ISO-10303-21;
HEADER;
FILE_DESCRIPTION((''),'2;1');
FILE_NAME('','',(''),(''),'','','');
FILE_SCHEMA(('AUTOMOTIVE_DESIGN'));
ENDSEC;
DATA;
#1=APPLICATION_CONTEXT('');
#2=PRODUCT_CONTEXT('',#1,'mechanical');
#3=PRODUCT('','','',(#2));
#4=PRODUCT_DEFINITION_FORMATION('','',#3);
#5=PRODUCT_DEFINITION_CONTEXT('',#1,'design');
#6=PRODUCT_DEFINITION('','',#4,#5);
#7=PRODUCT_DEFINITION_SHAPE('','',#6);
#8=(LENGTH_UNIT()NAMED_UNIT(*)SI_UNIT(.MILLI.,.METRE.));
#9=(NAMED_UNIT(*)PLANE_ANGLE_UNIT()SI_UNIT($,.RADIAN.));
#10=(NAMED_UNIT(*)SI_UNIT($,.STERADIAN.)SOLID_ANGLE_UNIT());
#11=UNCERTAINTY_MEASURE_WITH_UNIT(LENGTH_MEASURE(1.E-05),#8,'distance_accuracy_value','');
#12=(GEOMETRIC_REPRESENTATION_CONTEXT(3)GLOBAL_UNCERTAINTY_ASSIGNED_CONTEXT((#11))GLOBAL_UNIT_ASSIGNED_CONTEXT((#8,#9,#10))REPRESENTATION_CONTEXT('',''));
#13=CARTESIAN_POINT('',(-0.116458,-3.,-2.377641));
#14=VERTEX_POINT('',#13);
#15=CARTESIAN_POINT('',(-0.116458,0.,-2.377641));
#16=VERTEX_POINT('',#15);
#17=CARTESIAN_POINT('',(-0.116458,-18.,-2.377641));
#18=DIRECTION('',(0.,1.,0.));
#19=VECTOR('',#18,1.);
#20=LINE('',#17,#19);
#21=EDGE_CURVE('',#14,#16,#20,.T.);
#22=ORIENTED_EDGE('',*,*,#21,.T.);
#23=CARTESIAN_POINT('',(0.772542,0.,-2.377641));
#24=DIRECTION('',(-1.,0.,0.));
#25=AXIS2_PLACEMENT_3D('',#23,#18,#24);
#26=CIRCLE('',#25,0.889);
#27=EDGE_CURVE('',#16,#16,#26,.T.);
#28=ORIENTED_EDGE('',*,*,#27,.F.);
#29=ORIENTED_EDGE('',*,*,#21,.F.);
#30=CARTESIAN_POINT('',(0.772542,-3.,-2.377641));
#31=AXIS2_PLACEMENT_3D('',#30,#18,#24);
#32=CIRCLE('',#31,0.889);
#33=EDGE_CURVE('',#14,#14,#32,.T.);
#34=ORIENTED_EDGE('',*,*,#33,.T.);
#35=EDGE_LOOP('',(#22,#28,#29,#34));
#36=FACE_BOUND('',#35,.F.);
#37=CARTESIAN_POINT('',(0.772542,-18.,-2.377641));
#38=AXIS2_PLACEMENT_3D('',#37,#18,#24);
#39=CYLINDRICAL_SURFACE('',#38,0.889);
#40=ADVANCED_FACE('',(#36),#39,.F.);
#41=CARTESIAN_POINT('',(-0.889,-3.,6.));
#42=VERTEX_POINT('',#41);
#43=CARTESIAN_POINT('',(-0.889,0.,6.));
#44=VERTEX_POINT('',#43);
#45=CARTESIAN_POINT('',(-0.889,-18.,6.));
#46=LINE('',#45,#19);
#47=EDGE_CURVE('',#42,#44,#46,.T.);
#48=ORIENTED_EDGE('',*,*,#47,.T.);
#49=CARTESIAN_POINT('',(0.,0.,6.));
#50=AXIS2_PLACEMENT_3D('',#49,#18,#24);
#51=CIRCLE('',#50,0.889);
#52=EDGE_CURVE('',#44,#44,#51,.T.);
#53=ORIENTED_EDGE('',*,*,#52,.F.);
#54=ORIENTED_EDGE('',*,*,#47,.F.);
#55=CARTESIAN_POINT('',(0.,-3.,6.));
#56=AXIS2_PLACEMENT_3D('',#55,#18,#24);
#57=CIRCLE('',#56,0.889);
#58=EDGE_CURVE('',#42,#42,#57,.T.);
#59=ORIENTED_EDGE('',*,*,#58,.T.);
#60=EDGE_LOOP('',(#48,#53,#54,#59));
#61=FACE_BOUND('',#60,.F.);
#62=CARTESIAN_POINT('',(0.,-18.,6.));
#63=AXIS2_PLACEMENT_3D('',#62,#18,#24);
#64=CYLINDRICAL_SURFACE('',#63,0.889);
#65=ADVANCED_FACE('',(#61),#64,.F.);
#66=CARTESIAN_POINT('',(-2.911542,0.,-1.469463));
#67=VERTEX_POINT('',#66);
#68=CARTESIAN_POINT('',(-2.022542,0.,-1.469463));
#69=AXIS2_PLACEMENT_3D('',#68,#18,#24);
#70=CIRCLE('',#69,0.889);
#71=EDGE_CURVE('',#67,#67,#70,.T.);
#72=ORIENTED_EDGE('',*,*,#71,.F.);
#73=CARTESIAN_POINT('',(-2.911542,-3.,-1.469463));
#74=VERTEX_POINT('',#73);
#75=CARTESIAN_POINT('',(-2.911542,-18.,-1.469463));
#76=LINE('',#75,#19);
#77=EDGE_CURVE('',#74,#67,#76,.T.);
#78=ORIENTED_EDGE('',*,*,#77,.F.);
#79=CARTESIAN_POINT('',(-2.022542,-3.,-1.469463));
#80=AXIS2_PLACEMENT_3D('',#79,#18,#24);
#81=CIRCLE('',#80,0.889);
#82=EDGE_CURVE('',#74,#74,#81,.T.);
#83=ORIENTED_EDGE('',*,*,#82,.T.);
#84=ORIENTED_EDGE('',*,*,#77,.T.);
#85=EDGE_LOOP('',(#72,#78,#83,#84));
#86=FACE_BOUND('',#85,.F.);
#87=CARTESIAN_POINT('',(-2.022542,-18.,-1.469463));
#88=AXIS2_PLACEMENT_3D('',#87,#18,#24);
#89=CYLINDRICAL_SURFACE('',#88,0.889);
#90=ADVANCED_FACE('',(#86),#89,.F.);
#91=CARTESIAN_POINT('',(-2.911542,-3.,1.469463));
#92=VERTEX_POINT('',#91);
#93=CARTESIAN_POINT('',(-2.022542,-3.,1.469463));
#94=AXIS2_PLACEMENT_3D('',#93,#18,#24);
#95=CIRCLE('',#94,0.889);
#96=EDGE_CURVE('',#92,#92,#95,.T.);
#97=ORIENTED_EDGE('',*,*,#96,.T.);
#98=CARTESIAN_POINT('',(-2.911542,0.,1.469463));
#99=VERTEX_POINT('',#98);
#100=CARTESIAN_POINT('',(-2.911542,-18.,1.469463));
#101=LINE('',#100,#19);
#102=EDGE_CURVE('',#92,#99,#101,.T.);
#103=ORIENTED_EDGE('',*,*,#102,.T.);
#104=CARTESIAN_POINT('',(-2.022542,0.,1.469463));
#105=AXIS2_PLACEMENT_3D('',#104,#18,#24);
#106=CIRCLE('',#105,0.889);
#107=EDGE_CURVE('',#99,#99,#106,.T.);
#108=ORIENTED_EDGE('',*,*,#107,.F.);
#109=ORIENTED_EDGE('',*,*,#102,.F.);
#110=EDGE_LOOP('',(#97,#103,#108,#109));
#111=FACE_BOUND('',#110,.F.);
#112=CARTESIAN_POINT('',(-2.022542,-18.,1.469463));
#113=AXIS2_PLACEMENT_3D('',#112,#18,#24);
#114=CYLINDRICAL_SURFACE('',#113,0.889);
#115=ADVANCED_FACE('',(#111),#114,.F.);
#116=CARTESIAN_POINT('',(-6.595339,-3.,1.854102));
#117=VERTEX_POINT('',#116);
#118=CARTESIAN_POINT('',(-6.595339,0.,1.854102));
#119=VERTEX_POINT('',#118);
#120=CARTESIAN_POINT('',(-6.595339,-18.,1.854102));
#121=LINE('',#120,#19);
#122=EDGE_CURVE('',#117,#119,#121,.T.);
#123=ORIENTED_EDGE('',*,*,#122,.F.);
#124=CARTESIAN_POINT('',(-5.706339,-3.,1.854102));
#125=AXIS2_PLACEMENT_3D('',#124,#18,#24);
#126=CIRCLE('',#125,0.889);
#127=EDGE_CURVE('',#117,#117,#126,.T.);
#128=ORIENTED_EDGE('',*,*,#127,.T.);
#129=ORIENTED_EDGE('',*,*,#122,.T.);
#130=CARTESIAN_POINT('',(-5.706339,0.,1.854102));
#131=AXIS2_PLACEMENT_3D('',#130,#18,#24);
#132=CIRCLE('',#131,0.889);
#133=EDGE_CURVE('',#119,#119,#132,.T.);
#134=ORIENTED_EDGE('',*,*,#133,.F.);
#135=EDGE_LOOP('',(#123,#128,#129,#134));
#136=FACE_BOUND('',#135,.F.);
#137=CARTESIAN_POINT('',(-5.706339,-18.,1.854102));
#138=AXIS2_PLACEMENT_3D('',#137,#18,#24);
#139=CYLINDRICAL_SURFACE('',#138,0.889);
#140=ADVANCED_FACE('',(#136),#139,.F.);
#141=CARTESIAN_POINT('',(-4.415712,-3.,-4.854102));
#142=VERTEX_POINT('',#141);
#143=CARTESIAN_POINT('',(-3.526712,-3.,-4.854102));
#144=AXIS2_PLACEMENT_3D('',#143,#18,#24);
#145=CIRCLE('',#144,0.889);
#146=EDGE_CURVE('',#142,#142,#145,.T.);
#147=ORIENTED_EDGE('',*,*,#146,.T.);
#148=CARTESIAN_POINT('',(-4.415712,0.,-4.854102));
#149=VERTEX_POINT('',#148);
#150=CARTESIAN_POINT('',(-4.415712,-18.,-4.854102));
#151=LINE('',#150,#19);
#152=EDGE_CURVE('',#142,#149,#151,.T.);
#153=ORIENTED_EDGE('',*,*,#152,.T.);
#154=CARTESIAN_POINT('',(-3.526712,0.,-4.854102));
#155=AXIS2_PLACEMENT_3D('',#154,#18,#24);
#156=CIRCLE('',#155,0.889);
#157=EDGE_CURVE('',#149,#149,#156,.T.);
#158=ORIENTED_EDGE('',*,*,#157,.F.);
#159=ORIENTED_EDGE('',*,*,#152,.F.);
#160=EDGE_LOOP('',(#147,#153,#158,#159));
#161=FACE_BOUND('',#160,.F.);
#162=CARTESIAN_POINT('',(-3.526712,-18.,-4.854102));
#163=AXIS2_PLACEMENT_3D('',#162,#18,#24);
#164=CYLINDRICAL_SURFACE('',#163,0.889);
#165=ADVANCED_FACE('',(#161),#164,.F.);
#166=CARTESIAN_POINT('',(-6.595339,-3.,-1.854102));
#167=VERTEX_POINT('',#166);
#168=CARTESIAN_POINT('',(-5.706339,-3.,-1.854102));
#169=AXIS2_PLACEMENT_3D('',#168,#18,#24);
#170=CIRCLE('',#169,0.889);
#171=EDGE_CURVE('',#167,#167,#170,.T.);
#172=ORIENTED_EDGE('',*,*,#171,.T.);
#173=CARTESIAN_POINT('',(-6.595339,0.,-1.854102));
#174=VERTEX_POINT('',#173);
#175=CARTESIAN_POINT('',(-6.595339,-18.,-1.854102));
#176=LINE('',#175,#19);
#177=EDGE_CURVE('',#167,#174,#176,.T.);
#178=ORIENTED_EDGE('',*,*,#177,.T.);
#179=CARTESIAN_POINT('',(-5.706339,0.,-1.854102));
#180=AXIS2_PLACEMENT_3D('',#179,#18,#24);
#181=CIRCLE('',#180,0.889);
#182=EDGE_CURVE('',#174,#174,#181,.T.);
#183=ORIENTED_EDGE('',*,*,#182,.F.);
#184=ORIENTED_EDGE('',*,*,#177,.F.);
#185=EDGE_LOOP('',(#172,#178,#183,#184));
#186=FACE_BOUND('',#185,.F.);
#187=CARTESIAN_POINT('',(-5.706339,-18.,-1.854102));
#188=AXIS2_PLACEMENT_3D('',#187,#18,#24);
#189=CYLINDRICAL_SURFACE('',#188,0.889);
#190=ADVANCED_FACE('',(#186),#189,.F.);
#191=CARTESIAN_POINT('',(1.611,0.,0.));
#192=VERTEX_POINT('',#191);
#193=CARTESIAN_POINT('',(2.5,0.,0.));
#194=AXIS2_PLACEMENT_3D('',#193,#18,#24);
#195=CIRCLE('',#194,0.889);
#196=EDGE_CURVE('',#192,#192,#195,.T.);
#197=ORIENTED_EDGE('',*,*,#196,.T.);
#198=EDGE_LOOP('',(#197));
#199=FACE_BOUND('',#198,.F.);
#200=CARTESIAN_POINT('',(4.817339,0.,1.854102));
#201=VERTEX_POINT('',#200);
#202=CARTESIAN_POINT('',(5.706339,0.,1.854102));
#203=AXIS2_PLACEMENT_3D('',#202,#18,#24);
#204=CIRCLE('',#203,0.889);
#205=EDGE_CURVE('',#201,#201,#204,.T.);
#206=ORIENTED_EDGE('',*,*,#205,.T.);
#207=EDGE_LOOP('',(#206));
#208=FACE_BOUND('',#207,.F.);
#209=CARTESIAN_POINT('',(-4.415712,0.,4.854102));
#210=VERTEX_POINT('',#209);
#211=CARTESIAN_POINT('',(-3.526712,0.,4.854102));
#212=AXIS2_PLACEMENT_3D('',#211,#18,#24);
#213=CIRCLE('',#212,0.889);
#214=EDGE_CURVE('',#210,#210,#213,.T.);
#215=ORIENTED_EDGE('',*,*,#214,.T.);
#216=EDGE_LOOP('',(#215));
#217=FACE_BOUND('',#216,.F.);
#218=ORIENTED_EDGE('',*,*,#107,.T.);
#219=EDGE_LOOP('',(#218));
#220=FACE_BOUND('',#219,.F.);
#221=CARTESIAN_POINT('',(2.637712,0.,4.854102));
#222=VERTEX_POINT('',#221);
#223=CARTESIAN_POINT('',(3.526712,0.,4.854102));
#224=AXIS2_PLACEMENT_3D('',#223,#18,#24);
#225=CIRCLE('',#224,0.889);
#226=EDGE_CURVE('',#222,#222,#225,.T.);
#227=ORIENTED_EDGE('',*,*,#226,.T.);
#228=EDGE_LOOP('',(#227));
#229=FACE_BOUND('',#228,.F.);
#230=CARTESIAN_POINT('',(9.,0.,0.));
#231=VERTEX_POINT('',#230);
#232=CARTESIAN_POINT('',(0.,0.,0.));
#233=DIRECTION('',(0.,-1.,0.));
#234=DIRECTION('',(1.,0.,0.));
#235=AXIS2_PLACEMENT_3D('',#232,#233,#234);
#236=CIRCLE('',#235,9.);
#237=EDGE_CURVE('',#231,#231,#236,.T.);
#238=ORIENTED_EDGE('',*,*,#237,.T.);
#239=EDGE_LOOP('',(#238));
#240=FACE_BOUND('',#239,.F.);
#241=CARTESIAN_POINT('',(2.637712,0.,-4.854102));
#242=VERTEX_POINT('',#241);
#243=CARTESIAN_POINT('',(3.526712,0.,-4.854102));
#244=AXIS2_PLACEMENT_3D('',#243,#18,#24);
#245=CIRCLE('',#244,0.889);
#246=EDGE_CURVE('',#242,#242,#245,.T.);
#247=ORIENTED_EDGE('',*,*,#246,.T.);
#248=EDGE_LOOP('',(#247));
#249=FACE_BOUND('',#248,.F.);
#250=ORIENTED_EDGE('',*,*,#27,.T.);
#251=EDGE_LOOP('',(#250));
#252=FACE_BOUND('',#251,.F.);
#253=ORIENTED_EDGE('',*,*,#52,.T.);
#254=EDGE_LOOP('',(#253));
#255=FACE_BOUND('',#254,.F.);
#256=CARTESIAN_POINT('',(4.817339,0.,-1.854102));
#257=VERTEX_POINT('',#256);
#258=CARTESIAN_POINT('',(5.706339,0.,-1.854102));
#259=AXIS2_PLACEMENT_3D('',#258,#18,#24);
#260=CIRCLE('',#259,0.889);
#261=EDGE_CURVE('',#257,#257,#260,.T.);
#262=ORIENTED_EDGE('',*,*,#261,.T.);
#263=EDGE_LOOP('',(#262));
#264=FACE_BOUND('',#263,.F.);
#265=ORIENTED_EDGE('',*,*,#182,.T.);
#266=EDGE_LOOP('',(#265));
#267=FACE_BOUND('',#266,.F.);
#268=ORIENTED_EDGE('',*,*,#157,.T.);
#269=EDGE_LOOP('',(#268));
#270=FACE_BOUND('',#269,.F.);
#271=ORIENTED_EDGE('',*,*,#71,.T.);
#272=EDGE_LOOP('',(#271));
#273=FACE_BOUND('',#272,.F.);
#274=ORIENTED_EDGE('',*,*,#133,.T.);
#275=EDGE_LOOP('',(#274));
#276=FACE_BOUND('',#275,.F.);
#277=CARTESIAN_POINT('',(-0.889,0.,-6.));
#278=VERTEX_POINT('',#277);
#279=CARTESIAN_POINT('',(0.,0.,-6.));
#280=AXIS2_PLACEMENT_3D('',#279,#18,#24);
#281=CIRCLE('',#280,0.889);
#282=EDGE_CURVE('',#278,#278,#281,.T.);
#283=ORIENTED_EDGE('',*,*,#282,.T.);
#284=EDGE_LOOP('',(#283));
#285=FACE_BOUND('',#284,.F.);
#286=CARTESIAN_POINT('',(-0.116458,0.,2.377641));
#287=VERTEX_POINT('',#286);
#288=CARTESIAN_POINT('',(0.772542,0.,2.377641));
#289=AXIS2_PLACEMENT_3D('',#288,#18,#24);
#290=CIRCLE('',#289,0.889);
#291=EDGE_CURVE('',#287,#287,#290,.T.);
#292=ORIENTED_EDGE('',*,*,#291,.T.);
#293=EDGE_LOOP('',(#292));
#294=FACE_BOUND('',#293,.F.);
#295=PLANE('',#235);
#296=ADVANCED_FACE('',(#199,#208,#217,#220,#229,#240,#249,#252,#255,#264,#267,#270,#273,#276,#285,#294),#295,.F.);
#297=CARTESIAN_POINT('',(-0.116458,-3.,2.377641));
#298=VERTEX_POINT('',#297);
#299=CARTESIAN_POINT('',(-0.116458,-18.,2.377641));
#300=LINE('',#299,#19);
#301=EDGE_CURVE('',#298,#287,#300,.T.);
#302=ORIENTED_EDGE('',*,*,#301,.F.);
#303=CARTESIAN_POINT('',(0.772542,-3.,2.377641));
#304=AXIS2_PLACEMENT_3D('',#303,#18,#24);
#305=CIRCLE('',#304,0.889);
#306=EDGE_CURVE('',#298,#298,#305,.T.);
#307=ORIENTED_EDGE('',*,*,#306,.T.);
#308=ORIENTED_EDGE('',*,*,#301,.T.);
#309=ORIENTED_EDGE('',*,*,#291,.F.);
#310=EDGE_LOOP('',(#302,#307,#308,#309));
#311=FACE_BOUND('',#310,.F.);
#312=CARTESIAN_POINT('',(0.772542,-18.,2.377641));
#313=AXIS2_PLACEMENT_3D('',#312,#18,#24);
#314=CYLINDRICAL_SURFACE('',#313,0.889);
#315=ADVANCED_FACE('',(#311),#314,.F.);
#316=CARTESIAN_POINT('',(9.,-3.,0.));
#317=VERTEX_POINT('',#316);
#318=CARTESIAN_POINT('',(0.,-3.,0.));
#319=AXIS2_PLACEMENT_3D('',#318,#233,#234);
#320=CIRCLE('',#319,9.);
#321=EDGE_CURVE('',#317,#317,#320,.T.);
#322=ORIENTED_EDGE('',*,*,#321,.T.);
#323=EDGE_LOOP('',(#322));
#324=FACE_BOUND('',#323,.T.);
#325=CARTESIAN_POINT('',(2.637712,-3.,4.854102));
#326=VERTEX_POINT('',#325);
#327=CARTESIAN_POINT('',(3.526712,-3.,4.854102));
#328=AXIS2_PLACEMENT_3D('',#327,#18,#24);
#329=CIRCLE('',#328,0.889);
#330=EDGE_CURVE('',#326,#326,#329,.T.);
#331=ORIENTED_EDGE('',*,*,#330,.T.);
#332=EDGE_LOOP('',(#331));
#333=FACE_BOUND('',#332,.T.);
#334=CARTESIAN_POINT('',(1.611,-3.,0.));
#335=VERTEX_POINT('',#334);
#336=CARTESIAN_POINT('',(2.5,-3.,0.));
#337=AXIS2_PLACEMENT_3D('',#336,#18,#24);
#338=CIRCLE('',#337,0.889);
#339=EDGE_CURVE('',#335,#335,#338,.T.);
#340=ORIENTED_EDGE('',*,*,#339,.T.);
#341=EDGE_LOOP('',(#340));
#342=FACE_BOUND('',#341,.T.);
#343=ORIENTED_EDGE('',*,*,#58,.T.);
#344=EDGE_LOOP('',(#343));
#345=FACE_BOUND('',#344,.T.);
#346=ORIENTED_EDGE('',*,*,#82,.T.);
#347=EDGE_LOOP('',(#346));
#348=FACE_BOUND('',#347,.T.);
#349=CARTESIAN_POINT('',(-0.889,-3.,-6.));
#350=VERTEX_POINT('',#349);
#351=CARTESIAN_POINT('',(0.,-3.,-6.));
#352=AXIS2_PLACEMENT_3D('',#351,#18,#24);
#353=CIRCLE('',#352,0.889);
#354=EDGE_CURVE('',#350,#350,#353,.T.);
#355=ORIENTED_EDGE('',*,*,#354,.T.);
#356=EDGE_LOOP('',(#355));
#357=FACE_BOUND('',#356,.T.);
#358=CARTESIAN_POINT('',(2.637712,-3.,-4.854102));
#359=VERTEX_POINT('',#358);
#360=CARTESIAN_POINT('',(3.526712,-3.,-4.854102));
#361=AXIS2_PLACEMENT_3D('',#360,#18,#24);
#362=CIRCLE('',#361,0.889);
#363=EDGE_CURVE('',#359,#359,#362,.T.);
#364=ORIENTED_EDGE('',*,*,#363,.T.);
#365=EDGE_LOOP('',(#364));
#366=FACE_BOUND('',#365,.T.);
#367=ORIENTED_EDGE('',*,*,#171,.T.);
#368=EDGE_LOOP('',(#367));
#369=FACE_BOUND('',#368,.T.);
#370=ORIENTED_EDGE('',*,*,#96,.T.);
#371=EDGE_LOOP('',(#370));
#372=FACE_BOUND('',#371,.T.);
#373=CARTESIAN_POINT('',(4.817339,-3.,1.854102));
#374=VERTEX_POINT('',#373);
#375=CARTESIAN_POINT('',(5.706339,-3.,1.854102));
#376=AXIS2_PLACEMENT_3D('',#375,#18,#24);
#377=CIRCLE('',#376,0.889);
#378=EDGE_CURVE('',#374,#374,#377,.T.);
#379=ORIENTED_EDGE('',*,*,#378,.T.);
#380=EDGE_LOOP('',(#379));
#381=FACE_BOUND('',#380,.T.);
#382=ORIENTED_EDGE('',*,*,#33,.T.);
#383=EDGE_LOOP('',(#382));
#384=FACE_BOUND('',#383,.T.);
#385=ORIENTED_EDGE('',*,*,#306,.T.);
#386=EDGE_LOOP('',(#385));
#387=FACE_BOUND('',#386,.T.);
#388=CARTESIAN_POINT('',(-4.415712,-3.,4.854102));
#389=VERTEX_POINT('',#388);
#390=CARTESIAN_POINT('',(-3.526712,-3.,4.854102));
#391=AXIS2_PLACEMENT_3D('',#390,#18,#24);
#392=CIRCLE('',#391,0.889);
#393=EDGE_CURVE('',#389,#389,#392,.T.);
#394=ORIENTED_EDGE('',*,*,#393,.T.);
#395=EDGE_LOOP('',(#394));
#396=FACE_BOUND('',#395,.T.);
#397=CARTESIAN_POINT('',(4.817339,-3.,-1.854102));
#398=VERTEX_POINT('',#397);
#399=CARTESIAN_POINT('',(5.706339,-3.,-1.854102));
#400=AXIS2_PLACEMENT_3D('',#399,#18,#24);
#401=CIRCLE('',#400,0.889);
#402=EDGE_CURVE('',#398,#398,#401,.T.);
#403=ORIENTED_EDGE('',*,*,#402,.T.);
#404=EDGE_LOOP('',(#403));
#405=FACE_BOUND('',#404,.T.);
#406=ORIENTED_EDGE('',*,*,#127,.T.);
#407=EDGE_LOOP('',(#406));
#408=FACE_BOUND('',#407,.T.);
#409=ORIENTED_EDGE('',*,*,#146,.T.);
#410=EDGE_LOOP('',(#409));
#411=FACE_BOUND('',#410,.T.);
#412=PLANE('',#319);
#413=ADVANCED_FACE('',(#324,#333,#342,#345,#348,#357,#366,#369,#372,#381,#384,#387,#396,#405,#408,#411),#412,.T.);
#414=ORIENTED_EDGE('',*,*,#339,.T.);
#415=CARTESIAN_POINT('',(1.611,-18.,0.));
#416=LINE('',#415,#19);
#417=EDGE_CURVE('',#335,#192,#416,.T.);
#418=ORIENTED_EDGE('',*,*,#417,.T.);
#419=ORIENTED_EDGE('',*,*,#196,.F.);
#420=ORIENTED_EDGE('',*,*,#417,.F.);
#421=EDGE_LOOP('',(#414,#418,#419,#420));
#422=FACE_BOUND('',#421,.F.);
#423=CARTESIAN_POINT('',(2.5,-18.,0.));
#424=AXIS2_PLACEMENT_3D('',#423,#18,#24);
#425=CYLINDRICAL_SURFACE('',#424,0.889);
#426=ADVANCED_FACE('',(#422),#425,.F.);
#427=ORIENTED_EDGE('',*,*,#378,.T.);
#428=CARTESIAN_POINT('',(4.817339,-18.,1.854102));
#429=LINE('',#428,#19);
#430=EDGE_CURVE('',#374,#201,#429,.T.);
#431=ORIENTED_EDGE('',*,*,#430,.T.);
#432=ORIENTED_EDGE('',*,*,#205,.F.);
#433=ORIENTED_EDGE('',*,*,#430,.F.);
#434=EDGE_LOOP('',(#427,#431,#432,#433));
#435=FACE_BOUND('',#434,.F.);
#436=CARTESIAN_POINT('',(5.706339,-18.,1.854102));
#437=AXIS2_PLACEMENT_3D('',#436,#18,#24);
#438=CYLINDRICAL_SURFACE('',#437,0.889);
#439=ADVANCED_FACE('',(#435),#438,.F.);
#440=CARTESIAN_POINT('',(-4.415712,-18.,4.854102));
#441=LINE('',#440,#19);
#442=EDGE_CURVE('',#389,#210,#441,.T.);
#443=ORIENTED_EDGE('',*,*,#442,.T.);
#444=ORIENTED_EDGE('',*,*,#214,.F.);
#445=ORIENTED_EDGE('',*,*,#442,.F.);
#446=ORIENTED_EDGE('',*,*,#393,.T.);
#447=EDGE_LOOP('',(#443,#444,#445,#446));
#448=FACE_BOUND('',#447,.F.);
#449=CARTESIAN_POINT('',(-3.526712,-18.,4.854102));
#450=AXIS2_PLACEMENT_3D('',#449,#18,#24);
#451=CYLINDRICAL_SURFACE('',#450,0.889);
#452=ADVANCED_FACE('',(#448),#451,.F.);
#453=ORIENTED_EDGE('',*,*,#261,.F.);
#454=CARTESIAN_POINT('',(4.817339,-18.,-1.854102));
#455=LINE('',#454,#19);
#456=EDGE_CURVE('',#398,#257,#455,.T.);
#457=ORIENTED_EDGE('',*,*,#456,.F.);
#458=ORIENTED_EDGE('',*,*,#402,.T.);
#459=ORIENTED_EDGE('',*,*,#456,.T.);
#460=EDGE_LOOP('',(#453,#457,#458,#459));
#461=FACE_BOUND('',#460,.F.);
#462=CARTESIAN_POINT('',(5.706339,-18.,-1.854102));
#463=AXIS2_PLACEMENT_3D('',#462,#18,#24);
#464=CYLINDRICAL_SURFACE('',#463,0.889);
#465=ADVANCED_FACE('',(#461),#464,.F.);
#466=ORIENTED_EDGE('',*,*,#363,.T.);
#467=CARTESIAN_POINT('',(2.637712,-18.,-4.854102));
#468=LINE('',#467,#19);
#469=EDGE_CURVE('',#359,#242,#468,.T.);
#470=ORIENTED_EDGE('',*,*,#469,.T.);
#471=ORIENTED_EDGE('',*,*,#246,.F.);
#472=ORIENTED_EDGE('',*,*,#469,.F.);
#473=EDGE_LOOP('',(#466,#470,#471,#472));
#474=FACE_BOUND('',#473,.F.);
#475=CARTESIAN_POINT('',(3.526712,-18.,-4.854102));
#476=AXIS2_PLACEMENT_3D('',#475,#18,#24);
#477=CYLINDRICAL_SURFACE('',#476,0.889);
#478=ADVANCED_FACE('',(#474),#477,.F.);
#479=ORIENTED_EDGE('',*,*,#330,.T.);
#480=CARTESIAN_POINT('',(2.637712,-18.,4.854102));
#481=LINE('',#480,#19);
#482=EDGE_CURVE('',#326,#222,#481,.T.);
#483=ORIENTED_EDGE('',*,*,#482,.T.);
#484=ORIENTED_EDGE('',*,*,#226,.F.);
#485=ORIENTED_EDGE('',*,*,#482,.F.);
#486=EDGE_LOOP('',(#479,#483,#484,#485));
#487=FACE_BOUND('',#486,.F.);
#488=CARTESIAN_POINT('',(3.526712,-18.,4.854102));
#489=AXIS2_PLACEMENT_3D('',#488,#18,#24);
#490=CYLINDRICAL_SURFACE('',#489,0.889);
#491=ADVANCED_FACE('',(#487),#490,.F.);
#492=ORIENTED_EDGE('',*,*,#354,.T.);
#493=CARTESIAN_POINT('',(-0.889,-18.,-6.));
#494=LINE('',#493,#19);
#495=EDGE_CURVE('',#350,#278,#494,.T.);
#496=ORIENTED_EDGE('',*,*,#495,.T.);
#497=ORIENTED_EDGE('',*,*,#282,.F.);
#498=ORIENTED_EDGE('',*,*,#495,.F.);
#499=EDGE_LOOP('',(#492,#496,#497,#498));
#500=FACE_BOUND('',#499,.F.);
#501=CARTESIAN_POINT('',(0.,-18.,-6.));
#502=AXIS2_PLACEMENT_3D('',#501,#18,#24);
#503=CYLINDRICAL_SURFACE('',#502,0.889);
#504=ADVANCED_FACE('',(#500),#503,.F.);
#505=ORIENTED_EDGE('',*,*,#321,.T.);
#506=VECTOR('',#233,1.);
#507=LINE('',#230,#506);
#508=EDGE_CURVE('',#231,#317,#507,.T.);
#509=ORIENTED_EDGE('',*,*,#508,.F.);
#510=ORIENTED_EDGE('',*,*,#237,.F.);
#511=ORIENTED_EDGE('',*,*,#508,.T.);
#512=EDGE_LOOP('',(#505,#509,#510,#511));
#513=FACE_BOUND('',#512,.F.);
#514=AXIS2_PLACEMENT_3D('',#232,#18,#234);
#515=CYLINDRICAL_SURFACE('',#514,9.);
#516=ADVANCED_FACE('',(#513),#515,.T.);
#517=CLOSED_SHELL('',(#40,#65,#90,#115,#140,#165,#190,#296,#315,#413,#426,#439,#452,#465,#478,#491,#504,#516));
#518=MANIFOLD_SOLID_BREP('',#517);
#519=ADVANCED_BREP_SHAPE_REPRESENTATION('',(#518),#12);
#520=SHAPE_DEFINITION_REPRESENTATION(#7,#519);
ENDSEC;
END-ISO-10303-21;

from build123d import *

# Parameters (mm, degrees)
F0_R     = 9
F1_DEPTH = 3
F3_D     = 1.778
F3_DEPTH = 15
F3_TIP   = 0.5341650903


# Not quite as in the source:
# - a feature names something its author has since deleted; it is built from what else it names


with BuildPart() as f1:
    # F0 (on Front) → F1 (new body)
    with BuildSketch(Plane.XZ):
        Circle(F0_R)
    extrude(amount=F1_DEPTH)

    # F3
    with Locations(Plane.XZ.offset(3)):
        with Locations((-3.5267115138, 4.8541019662), (-5.7063390978, 1.8541019662), (-5.7063390978, -1.8541019662), (-3.5267115138, -4.8541019662), (0, -6), (3.5267115138, -4.8541019662), (5.7063390978, -1.8541019662), (0, 6), (-2.0225424859, 1.4694631307), (-2.0225424859, -1.4694631307), (0.7725424859, -2.3776412907), (2.5, 0), (0.7725424859, 2.3776412907), (3.5267115138, 4.8541019662), (5.7063390978, 1.8541019662)):
            Hole(F3_D / 2, depth=F3_DEPTH)
            with Locations((0, 0, -(F3_DEPTH + F3_TIP / 2))):  # 118° drill point
                Cone(0, F3_D / 2, F3_TIP, mode=Mode.SUBTRACT)


solid = f1.part
